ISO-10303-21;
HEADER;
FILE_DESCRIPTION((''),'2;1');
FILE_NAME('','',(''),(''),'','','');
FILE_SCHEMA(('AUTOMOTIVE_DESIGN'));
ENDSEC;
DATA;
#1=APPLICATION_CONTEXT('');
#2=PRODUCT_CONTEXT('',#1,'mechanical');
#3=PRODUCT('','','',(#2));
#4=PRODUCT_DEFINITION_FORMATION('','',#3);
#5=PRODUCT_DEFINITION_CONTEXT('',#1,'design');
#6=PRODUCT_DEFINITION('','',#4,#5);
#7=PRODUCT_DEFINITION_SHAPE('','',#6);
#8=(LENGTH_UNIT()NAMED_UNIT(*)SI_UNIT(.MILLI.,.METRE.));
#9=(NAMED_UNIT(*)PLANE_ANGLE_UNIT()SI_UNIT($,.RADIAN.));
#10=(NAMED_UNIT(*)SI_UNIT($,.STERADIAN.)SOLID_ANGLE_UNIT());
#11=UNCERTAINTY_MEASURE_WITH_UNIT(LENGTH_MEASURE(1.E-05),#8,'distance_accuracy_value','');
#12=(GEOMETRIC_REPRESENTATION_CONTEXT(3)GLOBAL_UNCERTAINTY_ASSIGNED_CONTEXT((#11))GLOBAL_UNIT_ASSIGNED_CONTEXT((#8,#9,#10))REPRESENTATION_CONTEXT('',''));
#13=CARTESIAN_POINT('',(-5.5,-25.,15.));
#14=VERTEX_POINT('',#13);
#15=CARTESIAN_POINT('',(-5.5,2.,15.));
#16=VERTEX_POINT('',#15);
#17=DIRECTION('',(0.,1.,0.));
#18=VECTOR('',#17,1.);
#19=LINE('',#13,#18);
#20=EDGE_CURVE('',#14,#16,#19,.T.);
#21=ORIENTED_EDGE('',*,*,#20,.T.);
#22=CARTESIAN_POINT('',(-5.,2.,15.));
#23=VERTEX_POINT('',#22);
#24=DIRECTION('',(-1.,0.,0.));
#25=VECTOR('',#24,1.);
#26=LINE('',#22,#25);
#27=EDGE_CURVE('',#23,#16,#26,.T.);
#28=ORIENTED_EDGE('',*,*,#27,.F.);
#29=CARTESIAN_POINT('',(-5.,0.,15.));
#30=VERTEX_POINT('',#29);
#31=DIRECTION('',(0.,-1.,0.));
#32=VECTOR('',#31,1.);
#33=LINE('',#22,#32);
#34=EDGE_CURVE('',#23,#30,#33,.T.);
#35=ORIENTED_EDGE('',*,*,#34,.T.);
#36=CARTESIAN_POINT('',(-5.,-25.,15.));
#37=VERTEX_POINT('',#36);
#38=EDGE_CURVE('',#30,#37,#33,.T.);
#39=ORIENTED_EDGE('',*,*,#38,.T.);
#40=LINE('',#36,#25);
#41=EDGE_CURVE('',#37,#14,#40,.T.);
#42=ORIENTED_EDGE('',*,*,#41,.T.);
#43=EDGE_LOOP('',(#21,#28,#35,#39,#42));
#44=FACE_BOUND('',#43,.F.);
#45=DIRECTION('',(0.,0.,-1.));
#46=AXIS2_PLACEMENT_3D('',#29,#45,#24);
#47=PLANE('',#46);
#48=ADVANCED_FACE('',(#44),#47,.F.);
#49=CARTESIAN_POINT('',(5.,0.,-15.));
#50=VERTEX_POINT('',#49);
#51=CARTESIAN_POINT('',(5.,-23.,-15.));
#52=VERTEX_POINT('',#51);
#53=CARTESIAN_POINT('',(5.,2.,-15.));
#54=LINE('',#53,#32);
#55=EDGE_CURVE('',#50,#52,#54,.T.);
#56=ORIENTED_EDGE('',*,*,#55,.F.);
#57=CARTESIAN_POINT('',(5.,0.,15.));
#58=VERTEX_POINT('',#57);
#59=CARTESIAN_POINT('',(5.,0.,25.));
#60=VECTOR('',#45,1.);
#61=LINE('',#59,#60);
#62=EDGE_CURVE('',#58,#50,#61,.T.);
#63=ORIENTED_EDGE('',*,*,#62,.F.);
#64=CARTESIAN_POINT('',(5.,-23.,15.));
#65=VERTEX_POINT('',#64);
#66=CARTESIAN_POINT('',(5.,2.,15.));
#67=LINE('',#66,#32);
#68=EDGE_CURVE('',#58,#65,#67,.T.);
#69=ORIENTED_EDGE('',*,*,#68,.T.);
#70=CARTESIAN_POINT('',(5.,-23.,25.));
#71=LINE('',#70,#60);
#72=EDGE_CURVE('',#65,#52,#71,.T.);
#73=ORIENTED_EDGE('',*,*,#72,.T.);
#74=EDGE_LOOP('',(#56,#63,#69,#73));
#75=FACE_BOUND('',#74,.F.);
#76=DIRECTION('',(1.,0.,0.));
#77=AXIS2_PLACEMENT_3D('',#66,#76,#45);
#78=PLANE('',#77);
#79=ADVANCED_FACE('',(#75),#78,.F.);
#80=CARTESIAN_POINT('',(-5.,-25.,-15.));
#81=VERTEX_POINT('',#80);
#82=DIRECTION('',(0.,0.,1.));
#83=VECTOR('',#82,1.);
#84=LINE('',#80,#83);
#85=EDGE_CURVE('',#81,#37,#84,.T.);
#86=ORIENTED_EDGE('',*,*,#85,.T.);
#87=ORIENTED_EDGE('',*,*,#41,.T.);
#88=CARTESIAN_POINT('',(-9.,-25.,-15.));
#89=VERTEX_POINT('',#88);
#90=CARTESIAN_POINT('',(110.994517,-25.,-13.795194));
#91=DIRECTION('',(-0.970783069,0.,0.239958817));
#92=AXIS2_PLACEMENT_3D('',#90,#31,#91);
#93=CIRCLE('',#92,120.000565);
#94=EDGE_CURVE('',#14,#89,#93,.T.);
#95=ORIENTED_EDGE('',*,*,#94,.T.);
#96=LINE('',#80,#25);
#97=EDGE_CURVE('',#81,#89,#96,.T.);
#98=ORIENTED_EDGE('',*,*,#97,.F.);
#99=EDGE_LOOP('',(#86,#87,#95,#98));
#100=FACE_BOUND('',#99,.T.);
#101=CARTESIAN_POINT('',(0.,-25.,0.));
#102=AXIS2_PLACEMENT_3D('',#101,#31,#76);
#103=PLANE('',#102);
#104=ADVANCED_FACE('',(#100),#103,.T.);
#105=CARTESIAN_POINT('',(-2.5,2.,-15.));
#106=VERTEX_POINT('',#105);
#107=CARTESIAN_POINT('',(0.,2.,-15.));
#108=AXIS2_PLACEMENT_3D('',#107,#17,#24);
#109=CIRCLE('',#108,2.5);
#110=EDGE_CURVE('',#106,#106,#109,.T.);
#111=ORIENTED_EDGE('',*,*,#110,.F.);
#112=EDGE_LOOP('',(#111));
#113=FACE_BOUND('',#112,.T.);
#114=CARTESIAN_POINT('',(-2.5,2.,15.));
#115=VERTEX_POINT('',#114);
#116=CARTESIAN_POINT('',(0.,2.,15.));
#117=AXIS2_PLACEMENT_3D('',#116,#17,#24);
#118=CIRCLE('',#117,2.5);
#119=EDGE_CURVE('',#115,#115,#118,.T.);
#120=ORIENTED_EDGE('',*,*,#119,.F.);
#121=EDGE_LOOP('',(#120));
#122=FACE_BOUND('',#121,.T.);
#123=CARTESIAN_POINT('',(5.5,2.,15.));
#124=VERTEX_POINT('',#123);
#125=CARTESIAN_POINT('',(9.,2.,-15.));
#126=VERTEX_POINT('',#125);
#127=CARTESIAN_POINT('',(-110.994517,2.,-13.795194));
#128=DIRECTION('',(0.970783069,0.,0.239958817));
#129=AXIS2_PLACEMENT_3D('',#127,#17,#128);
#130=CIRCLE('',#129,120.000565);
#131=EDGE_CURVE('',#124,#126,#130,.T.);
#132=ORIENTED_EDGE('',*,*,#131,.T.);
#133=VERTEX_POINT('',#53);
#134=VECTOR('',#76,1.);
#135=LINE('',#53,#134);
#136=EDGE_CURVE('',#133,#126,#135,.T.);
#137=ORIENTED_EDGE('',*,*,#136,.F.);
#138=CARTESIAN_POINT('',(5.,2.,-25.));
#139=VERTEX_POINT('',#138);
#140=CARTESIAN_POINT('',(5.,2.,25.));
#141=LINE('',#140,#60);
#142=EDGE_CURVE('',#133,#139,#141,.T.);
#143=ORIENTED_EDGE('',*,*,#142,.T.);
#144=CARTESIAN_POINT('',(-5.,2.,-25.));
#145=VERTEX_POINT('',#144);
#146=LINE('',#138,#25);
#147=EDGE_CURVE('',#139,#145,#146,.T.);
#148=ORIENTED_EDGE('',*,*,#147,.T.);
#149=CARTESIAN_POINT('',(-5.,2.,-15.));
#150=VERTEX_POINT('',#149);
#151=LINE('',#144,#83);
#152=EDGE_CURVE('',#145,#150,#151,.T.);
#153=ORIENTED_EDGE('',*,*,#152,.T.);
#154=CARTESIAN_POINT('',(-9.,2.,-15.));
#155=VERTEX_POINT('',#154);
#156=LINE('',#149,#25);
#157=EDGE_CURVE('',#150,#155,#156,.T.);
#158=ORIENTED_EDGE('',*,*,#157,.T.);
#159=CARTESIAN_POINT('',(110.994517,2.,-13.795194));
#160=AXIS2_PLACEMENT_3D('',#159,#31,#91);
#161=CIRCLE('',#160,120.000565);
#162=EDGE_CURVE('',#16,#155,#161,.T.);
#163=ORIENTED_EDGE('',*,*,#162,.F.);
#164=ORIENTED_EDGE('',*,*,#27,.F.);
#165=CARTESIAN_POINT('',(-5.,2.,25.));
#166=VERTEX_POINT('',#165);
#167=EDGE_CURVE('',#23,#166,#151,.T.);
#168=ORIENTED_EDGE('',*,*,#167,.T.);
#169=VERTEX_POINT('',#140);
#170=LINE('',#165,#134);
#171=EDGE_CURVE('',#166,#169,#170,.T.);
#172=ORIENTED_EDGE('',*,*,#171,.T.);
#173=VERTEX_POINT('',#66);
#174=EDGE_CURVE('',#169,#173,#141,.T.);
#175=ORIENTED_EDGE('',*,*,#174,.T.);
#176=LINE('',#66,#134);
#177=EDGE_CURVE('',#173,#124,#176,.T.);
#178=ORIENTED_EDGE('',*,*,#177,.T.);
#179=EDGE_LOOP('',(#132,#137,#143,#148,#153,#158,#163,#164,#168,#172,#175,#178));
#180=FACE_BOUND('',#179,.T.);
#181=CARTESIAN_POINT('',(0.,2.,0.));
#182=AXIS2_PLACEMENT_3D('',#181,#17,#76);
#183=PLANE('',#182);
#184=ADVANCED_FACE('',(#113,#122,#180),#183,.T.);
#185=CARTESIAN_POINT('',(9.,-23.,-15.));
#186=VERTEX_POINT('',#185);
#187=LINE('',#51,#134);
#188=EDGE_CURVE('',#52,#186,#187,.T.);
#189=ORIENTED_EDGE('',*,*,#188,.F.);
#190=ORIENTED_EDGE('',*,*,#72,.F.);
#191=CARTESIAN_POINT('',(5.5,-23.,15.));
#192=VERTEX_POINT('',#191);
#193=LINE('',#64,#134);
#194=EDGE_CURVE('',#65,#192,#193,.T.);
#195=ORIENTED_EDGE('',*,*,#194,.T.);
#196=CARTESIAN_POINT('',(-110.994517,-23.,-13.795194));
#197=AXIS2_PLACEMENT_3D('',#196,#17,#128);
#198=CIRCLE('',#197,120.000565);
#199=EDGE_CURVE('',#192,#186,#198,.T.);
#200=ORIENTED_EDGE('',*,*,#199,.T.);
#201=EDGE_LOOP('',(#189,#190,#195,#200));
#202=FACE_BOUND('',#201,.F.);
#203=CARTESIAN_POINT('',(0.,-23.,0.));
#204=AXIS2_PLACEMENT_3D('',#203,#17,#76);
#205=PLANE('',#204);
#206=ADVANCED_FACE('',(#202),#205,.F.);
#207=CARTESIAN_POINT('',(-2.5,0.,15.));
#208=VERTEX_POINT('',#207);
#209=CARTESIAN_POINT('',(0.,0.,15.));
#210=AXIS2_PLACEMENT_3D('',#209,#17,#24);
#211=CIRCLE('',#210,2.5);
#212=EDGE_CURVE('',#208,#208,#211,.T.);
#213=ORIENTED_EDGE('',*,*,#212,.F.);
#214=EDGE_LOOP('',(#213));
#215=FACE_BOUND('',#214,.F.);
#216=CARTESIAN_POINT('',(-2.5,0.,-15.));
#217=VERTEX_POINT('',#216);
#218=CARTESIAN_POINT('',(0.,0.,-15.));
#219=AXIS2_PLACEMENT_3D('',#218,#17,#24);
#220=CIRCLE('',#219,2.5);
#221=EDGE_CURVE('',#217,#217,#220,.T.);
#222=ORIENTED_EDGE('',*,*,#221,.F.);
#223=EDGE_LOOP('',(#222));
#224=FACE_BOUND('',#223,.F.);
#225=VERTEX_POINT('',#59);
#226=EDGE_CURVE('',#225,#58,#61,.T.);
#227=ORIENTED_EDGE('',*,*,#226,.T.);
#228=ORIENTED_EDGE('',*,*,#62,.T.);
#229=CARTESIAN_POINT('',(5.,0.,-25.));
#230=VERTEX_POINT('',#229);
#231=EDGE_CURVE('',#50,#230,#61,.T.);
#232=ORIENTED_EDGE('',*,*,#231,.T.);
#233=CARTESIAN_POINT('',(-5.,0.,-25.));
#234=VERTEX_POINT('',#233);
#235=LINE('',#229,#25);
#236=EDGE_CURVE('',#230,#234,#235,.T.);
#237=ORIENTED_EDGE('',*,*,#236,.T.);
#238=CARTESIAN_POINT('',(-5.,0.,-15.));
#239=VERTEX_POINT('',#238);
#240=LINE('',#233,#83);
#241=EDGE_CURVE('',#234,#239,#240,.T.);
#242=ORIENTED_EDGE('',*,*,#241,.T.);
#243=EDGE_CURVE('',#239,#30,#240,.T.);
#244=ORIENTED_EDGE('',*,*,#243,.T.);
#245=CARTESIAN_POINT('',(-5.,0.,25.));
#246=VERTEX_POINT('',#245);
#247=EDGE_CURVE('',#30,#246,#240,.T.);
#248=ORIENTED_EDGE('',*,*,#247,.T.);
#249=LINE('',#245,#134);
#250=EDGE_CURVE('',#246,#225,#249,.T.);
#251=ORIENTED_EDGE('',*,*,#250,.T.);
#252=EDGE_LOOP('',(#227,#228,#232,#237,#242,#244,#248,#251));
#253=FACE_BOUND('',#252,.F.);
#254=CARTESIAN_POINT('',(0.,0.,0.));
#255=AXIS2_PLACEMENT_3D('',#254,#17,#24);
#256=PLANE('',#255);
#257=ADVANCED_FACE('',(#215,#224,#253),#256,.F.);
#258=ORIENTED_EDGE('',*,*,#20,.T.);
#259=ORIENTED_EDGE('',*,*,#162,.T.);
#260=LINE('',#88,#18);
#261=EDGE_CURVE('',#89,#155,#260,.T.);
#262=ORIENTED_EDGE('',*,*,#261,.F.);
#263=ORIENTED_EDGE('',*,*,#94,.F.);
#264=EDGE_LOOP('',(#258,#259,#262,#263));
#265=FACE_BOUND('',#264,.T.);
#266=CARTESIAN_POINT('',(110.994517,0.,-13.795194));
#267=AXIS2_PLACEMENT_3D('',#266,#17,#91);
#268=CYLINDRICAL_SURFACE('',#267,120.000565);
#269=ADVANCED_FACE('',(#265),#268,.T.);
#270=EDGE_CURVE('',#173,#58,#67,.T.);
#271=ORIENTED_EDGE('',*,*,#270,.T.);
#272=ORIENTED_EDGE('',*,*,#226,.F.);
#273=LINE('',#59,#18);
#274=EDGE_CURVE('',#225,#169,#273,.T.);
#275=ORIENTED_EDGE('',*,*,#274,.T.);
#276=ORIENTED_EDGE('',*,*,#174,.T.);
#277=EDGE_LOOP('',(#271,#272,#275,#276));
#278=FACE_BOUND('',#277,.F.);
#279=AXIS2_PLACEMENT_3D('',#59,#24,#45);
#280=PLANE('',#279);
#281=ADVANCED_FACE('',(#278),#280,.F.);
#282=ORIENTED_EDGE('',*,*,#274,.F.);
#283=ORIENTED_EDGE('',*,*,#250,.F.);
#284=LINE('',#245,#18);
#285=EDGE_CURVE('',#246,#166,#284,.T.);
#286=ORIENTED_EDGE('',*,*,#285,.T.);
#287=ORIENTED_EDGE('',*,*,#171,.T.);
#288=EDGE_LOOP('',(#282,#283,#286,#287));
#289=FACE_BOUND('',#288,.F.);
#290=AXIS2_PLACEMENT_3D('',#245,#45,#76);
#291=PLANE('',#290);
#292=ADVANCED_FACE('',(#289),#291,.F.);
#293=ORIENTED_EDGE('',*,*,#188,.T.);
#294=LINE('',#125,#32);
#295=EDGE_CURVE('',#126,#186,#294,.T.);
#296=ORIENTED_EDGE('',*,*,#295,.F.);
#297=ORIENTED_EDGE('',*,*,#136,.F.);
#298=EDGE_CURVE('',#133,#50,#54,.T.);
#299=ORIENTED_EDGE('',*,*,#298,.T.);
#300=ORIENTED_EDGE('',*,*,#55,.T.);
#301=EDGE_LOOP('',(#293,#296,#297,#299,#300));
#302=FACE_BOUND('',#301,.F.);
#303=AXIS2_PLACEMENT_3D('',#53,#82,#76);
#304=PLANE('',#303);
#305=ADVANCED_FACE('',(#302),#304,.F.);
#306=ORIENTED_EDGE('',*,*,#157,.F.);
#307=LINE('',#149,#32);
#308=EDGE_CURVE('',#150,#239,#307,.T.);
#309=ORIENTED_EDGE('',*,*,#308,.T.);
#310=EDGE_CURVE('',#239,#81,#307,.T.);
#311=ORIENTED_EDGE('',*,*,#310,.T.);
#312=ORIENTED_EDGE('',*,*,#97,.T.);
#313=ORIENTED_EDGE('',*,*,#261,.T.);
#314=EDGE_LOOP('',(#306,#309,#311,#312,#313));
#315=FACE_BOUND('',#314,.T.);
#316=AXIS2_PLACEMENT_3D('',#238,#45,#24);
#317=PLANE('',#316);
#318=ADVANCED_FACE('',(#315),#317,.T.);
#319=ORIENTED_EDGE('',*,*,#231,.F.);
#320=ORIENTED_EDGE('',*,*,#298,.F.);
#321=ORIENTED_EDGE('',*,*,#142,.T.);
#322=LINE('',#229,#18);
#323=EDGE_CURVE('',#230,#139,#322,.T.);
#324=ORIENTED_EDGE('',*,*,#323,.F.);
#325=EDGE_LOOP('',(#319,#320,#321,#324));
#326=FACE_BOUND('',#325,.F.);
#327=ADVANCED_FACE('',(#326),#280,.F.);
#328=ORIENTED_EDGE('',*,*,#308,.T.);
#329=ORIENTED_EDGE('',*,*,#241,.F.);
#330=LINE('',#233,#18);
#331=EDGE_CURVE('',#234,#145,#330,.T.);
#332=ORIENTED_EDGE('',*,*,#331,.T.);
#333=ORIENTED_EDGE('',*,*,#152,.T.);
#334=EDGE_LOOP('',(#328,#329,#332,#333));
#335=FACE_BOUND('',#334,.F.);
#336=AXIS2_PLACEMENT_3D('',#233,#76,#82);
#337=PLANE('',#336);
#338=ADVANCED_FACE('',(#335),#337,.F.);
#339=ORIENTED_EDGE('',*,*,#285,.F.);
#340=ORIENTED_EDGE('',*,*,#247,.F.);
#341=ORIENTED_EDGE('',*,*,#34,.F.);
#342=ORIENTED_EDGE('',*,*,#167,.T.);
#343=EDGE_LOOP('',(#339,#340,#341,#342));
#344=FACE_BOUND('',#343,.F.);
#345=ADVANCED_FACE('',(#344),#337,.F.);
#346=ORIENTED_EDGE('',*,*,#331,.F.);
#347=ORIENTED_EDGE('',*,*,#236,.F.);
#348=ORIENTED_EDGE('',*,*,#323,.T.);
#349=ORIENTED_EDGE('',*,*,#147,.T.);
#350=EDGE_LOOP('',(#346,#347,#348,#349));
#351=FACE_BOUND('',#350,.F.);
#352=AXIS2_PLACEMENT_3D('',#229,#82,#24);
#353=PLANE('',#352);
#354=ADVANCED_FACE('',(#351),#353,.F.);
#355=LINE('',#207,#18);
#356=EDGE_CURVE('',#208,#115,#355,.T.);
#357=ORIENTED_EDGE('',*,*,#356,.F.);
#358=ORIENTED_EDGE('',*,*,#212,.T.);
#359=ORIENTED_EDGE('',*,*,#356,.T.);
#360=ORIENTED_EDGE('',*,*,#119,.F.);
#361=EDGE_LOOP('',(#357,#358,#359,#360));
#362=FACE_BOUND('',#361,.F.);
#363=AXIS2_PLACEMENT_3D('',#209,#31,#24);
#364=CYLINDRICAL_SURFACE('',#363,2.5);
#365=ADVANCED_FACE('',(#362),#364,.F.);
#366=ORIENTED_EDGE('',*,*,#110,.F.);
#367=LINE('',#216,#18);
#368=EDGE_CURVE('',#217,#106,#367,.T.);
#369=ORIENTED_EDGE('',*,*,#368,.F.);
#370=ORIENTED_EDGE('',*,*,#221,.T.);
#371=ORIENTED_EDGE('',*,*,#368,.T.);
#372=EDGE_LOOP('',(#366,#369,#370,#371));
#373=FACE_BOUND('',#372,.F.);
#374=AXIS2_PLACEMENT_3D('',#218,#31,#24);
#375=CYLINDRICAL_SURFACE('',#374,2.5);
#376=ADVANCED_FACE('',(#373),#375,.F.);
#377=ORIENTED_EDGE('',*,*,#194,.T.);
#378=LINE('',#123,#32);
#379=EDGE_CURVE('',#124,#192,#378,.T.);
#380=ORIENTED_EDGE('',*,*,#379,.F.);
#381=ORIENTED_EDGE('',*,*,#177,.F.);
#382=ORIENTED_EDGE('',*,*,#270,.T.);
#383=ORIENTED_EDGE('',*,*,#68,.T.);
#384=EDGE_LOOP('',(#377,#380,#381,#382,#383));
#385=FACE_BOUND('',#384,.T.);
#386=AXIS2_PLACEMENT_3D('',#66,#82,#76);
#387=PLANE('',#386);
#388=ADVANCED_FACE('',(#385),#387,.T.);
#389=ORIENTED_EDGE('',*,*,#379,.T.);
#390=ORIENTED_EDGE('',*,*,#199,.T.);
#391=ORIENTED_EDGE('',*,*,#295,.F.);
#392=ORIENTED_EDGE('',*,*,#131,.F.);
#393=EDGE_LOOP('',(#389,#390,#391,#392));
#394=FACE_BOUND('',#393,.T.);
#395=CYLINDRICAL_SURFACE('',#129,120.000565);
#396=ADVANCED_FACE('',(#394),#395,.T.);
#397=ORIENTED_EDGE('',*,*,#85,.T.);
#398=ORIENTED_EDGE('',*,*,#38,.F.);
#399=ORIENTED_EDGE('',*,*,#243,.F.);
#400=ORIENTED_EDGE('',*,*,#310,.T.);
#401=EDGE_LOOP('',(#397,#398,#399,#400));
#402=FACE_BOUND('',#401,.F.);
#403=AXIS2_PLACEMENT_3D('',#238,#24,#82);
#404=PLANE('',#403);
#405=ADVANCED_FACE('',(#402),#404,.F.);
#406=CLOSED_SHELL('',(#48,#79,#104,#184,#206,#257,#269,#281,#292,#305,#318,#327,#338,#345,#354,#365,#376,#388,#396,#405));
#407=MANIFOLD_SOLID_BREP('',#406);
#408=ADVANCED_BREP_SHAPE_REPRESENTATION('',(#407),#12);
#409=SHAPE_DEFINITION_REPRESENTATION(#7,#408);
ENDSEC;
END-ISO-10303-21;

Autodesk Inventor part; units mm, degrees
ref_plane "YZ Plane" through (0, 0, 0) normal (1, 0, 0) x (0, 1, 0)
ref_plane "XZ Plane" through (0, 0, 0) normal (0, 1, 0) x (-1, 0, 0)
ref_plane "XY Plane" through (0, 0, 0) normal (0, 0, 1) x (1, 0, 0)
sketch "Sketch1" plane through (0, 0, 0) normal (0, 1, 0) x (-1, 0, 0)
  line L0 (5, 25) -> (-5, 25)
  line L1 (-5, 25) -> (-5, -25)
  line L2 (-5, -25) -> (5, -25)
  line L3 (5, -25) -> (5, 25)
  line L4 (5, 25) -> (-5, -25) construction
  line L5 (-5, 25) -> (5, -25) construction
  circle A0 centre (0, 15) radius 2.5
  circle A1 centre (0, -15) radius 2.5
  point P0 (0, 0)
  point P1 (0, 25)
  dimension "d0" = 10
  dimension "d1" = 50
  dimension "d2" = 5
  dimension "d3" = 5
  dimension "d4" = 30
  dimension "d5" = 10
  dimension "d6" = 5
  dimension "d7" = 5
extrude "Extrusion1" add sketch "Sketch1" along normal blind 2
sketch "Sketch2" plane through (0, 0, 0) normal (0, -1, 0) x (1, 0, 0)
  line L0 (-5, -15) -> (-9, -15)
  line L1 (-5, 15) -> (-5.5, 15)
  circle A0 centre (0, -15) radius 2.5 projected
  circle A1 centre (0, 15) radius 2.5 projected
  arc A2 (-5.5, 15) -> (-9, -15) centre (110.994, -13.7951) ccw
  line L2 (-5, -15) -> (-5, 15)
  line L3 (-5, -25) -> (-5, 25) projected
  point P0 (0, 0)
  point P1 (-4, -14.9499)
  point P2 (-3, -15)
  dimension "d10" = 0
  dimension "d11" = 0
  dimension "d12" = 4
  dimension "d13" = 0.5
  dimension "d14" = 120
  dimension "d15" = 0
  dimension "d16" = 0
  dimension "d17" = 0
extrude "Extrusion2" add sketch "Sketch2" along normal blind 25 and the other way blind 2 contours L0 A2 L1 L2
sketch "Sketch3" plane through (0, 2, 0) normal (0, 1, 0) x (1, 0, 0)
  line L0 (5, -25) -> (5, 25) projected
  line L1 (5, 15) -> (9, 15)
  line L2 (5, -15) -> (5.5, -15)
  line L3 (5, -15) -> (5, 15)
  circle A0 centre (0, 15) radius 2.5 projected
  circle A1 centre (0, -15) radius 2.5 projected
  arc A2 (5.5, -15) -> (9, 15) centre (-110.994, 13.7951) ccw
  point P0 (0, 0)
  dimension "d22" = 0
  dimension "d23" = 0
  dimension "d24" = 0.5
  dimension "d25" = 4
  dimension "d26" = 120
extrude "Extrusion3" add sketch "Sketch3" against normal blind 25 contours L0 L1 A2 L2
properties part number "squeezer"
